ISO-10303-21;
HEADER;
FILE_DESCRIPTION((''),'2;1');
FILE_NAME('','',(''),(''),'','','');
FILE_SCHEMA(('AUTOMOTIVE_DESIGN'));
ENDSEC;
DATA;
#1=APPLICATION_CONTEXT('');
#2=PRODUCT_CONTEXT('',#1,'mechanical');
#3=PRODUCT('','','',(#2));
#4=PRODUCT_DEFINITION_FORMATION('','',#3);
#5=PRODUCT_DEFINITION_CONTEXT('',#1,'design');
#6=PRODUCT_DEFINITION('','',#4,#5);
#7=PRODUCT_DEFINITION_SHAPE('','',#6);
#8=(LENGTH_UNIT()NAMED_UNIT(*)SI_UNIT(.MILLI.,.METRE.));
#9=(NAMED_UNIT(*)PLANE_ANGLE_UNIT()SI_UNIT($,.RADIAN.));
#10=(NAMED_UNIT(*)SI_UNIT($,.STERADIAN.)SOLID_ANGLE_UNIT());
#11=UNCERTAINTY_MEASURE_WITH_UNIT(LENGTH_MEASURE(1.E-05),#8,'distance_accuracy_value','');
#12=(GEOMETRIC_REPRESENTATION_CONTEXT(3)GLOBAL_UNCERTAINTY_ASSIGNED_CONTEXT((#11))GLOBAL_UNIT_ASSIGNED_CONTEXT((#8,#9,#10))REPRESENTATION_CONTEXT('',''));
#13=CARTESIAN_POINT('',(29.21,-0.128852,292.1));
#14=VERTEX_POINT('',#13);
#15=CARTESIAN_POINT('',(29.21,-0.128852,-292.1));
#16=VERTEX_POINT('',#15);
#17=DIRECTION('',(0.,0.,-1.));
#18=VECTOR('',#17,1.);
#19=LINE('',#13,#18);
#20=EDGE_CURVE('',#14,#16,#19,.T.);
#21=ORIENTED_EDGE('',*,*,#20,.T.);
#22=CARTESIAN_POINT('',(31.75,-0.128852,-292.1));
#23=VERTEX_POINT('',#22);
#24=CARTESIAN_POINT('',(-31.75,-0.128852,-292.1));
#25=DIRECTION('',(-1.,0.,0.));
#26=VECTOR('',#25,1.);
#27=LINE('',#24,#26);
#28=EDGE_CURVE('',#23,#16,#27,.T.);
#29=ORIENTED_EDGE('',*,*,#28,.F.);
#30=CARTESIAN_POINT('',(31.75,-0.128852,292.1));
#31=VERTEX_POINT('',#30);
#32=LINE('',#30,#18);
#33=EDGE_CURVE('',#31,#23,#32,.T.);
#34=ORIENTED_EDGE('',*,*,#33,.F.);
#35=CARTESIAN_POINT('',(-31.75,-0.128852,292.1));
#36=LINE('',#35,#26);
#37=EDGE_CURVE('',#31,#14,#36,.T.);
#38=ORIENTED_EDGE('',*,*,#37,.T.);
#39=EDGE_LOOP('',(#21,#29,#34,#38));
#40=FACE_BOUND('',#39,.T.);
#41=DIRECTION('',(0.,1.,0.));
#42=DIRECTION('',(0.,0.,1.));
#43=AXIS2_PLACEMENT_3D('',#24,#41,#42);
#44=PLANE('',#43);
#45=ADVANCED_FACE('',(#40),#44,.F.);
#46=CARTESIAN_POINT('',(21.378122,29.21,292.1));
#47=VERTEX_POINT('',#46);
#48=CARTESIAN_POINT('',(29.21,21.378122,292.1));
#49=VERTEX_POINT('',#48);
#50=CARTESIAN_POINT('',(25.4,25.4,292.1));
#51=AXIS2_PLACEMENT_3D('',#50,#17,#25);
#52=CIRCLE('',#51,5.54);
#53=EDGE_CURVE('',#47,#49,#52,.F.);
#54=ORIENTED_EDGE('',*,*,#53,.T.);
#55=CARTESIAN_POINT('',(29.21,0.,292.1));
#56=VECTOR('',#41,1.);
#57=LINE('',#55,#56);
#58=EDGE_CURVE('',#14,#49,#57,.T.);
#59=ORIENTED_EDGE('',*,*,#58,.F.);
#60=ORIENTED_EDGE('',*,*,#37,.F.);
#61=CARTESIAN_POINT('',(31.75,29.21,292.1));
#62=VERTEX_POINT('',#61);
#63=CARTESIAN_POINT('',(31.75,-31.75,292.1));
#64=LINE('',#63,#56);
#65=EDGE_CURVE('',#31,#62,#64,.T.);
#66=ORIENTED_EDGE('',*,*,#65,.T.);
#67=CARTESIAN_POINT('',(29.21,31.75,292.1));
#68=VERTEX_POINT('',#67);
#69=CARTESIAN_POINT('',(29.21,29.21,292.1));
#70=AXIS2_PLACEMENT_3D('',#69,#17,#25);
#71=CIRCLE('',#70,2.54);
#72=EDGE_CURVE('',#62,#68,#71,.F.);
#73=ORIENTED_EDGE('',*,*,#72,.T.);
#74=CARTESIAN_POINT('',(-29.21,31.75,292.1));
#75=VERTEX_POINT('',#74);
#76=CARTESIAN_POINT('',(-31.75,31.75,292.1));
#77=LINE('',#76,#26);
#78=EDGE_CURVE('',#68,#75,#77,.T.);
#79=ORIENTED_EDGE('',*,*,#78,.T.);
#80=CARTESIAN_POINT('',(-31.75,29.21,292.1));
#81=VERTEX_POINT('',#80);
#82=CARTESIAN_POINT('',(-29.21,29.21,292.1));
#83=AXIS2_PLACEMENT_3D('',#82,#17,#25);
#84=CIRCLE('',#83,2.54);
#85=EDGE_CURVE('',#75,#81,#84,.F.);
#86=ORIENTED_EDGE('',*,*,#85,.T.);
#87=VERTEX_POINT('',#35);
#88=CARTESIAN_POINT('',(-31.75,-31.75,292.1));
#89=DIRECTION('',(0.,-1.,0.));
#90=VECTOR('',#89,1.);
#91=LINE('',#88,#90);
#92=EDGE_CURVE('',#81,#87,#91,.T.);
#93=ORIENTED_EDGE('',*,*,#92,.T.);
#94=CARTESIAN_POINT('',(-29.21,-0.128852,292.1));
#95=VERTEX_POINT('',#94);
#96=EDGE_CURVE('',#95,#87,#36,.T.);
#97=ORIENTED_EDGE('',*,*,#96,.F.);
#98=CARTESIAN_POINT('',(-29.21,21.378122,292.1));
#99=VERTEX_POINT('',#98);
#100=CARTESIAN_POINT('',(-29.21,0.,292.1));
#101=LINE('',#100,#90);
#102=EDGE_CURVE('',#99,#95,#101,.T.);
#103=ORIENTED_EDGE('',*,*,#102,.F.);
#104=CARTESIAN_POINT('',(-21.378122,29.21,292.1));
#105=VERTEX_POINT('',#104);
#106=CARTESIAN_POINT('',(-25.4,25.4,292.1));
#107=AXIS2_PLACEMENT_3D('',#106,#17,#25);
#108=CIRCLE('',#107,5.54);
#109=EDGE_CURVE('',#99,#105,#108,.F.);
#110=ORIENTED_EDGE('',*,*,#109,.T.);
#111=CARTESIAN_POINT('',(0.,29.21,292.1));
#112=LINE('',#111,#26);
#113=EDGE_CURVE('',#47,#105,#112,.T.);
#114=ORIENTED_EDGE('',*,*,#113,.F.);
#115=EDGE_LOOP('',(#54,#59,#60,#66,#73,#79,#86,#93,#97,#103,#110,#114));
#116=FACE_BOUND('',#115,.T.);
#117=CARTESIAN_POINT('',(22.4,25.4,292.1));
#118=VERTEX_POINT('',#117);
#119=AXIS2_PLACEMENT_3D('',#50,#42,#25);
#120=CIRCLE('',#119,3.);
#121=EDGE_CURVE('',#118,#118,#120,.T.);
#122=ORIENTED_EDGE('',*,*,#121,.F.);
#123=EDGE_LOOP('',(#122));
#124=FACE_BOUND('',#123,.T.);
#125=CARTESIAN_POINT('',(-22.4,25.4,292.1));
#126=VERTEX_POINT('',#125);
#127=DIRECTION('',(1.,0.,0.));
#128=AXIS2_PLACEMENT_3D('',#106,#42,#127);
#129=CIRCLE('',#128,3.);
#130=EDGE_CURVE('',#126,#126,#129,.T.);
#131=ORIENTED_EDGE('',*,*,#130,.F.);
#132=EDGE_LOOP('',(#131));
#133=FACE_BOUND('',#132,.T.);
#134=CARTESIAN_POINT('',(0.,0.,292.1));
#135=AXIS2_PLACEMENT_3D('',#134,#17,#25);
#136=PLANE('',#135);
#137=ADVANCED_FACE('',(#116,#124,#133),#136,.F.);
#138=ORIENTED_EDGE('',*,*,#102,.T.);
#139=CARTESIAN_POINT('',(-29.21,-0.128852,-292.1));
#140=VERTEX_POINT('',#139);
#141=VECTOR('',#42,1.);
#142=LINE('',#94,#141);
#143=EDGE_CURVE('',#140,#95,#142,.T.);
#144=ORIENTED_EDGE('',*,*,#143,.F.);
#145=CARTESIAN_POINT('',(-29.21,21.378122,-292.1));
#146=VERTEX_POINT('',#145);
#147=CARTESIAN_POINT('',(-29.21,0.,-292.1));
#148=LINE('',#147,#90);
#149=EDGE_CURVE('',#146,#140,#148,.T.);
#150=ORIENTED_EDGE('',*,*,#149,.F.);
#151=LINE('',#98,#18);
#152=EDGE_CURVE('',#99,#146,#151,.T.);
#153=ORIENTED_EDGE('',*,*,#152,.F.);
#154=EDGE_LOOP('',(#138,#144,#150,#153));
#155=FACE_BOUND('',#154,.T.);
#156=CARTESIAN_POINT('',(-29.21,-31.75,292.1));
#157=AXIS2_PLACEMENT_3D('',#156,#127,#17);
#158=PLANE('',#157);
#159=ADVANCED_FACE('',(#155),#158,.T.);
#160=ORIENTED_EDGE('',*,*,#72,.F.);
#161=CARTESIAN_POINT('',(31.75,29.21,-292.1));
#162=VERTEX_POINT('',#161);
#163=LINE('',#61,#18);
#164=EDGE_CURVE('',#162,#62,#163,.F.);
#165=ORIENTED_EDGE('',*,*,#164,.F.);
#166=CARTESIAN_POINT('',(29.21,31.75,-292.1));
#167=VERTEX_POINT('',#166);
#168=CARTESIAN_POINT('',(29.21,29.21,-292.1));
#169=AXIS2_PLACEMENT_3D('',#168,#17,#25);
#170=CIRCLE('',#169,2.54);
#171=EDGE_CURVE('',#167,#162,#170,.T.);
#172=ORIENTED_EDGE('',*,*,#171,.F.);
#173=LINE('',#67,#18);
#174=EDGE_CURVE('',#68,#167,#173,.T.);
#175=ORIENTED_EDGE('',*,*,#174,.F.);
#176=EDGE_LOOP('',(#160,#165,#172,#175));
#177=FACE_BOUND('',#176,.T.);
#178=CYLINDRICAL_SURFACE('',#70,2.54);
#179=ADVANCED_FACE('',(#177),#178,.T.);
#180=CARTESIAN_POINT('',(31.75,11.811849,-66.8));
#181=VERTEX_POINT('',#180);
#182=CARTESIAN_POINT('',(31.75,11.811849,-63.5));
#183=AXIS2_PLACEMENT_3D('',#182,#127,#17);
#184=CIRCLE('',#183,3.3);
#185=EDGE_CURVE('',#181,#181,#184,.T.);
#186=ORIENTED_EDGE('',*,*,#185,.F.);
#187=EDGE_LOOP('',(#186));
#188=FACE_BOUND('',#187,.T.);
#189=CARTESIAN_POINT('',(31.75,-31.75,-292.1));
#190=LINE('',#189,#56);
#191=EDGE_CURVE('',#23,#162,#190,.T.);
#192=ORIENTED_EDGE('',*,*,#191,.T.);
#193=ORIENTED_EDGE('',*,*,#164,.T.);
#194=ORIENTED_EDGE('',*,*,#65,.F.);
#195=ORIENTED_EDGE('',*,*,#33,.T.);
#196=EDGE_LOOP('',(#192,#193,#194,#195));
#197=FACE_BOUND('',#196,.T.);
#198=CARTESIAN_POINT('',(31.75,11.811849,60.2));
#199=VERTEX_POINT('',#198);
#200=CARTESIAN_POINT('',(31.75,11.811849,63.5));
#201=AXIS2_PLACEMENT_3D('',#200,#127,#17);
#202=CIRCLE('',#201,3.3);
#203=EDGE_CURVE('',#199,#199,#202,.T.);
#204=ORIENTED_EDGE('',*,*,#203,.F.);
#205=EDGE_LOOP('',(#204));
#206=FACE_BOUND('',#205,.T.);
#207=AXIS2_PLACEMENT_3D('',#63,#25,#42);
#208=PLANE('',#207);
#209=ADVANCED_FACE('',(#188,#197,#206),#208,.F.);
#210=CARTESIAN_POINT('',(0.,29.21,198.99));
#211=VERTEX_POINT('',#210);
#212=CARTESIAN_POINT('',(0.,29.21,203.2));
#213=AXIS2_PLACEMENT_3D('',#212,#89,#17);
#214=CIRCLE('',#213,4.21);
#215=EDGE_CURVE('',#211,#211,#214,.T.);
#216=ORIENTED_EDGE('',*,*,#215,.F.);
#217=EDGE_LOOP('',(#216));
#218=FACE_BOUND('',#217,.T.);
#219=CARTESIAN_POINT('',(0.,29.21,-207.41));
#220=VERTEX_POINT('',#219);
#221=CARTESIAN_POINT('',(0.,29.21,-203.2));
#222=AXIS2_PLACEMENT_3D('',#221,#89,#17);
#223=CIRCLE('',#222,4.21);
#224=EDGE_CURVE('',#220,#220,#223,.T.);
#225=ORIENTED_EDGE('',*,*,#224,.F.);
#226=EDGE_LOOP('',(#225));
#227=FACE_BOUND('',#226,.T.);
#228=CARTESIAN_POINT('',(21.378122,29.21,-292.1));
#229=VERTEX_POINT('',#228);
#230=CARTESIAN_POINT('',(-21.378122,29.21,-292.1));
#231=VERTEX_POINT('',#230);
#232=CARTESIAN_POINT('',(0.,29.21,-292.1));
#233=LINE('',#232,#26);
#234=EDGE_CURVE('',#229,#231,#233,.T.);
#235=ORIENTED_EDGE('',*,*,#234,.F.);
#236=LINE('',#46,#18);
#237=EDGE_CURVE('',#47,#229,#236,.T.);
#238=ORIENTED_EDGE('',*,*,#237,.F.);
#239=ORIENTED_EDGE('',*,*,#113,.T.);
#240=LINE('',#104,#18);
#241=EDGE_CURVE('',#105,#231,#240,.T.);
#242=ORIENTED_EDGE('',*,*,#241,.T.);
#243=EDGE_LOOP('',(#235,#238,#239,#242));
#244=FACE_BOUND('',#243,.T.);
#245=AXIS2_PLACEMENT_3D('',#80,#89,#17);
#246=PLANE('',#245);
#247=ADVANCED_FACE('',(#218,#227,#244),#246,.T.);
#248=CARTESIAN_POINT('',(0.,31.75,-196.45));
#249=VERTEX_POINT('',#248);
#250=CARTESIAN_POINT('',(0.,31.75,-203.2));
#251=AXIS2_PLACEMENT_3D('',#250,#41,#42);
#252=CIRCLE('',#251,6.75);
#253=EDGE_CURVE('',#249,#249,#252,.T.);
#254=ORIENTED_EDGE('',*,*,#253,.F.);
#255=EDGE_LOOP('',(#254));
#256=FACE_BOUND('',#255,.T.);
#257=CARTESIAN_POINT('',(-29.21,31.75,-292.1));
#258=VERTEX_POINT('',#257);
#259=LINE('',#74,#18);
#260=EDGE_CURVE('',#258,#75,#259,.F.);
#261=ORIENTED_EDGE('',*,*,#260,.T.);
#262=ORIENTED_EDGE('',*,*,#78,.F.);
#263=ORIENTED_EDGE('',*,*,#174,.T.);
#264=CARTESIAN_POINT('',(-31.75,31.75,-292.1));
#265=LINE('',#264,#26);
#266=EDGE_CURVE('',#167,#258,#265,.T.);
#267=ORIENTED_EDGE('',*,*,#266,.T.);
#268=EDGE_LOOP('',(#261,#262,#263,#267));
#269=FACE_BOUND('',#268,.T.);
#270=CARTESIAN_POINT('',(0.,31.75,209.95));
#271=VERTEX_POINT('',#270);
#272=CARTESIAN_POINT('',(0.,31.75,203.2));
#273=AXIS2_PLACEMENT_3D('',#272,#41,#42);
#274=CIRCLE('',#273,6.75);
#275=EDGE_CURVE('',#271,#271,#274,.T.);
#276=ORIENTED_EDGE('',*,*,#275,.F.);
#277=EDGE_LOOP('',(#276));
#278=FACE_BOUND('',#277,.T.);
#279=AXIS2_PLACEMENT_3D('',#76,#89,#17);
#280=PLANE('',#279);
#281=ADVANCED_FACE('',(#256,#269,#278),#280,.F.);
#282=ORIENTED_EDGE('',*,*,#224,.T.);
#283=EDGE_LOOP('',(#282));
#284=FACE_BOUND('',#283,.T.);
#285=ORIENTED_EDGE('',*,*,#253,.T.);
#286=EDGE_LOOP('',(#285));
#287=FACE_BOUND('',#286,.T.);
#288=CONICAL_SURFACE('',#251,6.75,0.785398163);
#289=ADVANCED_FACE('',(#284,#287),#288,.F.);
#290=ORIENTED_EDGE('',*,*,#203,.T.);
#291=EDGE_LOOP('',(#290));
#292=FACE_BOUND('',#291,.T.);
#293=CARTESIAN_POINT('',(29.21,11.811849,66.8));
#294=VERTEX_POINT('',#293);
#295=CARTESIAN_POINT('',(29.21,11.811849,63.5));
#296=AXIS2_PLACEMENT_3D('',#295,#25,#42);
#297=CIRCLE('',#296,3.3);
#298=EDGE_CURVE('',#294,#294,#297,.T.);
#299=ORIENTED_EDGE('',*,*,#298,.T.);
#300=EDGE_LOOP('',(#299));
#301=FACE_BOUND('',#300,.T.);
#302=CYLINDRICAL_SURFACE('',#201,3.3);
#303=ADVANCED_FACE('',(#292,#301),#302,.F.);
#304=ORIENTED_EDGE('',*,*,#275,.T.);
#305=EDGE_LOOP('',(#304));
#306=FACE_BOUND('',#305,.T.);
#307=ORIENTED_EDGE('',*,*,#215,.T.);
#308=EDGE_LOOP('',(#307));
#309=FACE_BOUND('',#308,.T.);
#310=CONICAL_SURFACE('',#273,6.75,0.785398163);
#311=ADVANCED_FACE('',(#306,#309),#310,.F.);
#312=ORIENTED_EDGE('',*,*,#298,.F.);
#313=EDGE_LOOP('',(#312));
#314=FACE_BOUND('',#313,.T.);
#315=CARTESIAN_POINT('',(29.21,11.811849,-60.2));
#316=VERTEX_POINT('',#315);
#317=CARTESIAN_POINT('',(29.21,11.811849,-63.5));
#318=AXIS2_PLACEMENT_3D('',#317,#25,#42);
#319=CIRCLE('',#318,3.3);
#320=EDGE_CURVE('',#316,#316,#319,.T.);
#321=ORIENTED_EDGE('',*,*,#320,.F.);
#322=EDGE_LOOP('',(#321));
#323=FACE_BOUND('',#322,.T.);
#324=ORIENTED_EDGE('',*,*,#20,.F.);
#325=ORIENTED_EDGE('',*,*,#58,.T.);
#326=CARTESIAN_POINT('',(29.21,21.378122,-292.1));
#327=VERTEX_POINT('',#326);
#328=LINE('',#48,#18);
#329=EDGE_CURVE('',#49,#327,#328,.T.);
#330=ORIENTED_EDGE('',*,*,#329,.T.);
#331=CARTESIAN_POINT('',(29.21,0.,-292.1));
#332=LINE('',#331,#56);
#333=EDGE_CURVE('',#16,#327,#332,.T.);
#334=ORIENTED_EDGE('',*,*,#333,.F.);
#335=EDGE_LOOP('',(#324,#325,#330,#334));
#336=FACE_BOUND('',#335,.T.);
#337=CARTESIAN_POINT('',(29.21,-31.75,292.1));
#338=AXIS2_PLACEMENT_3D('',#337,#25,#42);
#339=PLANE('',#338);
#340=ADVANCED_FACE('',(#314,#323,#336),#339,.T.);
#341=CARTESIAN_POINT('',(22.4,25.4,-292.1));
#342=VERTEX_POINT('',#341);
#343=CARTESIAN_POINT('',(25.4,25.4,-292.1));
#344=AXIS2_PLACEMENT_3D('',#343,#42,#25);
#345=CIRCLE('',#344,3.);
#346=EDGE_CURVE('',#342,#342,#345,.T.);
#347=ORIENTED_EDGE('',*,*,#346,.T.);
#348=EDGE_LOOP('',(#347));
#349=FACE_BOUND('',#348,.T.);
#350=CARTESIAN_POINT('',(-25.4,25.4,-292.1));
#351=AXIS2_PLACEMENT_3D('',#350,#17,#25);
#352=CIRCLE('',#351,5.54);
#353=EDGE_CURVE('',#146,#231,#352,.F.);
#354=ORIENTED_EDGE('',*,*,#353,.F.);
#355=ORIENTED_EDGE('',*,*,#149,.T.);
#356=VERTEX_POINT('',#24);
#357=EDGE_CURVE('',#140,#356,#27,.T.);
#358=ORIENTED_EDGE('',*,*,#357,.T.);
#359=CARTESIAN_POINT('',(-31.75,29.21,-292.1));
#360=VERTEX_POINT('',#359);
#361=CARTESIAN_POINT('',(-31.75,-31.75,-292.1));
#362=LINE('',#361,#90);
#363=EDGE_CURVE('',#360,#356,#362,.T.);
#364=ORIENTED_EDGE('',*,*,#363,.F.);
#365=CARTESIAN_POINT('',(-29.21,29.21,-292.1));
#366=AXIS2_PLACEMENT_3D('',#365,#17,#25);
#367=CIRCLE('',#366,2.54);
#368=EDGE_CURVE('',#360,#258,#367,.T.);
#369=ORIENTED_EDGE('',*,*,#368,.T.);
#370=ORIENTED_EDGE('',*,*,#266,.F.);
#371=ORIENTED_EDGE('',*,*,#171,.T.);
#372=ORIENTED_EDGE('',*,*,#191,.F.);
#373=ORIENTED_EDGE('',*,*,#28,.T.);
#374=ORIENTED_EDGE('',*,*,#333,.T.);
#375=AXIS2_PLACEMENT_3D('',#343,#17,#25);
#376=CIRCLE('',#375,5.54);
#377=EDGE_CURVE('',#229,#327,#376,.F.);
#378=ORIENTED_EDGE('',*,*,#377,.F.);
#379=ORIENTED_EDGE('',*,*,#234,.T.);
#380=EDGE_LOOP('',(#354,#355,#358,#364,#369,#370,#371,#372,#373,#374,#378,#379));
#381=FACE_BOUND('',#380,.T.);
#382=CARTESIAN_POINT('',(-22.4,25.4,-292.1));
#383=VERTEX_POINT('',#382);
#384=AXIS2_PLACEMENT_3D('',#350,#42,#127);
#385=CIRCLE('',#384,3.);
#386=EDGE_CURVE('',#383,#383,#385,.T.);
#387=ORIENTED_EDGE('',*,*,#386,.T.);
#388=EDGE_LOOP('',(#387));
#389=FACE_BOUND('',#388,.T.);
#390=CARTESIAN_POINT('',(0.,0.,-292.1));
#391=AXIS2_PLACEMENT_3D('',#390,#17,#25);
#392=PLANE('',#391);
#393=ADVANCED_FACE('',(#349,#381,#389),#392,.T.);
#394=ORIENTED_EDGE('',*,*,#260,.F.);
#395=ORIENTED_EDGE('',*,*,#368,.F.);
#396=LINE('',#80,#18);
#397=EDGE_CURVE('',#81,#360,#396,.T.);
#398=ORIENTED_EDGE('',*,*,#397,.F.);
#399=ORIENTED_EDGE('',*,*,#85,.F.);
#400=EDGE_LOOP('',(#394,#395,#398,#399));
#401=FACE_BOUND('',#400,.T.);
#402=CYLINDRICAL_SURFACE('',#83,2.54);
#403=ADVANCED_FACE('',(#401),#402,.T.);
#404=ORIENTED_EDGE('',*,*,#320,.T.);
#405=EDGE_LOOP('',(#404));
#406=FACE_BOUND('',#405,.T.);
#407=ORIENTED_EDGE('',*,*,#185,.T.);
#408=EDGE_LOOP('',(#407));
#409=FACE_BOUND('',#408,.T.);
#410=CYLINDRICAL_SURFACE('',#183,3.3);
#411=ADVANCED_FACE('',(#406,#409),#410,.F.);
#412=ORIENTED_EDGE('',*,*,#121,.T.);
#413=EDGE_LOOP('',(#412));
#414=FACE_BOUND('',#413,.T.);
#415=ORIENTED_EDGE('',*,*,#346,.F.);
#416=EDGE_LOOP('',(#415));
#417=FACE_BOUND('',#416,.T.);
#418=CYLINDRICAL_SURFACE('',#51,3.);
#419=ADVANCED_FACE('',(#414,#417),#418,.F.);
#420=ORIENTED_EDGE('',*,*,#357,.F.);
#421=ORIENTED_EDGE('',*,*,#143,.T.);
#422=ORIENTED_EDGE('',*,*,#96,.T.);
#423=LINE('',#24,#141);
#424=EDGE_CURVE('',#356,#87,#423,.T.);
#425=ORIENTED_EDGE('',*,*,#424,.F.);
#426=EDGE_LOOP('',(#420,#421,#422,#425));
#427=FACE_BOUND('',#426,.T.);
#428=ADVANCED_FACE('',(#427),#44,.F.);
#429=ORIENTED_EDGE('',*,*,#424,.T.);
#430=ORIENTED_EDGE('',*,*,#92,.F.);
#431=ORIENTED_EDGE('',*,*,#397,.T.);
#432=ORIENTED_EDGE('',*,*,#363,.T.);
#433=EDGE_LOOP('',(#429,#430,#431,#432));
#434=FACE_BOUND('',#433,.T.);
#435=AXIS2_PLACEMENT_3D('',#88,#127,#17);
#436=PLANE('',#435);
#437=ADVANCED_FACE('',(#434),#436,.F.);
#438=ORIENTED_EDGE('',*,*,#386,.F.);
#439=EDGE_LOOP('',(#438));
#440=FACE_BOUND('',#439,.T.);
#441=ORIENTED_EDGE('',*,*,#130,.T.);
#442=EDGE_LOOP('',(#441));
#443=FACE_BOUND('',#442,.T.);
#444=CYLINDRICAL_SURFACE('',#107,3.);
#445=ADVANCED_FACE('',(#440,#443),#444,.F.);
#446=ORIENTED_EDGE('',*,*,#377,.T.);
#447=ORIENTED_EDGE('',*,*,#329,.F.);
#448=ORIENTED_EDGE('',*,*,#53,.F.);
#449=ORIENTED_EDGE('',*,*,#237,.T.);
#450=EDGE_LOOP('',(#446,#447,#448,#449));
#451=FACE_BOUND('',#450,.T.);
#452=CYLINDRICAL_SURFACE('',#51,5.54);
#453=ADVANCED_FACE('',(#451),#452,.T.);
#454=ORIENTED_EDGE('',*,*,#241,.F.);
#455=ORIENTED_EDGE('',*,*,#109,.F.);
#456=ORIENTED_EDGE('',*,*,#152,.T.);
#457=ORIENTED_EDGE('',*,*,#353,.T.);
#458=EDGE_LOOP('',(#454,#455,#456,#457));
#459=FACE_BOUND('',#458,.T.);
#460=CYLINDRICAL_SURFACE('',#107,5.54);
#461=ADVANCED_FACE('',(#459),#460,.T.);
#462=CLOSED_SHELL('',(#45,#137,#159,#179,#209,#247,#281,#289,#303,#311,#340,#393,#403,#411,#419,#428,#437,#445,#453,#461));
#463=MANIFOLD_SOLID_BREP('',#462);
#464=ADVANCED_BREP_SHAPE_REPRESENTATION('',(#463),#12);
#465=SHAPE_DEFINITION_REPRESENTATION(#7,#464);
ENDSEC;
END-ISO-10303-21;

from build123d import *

# Parameters (mm, degrees)
SKETCH1_W                                            = 63.5
SKETCH1_H                                            = 63.5
SKETCH1_R                                            = 3
BOSS_EXTRUDE1_DEPTH                                  = 292.1
FILLET1_R                                            = 2.54
SHELL1_START                                         = -292.1
SHELL1_DEPTH                                         = 584.2
SKETCH3_W                                            = 63.665273771
SKETCH3_H                                            = 31.75
CUT_EXTRUDE2_DEPTH                                   = 586.923002621
CSK_FOR_M6_HEX_SOCKET_COUNTERSUNK_HEAD_S_D           = 6.4
CSK_FOR_M6_HEX_SOCKET_COUNTERSUNK_HEAD_S_CSINK_D     = 13.5
CSK_FOR_M6_HEX_SOCKET_COUNTERSUNK_HEAD_S_CSINK_ANGLE = 90
M6_CLEARANCE_HOLE1_D                                 = 6.6
M6_CLEARANCE_HOLE1_DEPTH                             = 2.54


# Read off the part's stored shape, not the designer's step: Shell1
with BuildPart() as part:
    # Sketch1 → Boss-Extrude1 (new, symmetric)
    with BuildSketch(Plane.XY):
        Rectangle(SKETCH1_W, SKETCH1_H)
        with Locations((-25.4, 25.4)):
            Circle(SKETCH1_R, mode=Mode.SUBTRACT)
        with Locations(Location((25.4, -25.4, 0), (0, 0, 180))):
            Circle(SKETCH1_R, mode=Mode.SUBTRACT)
        with Locations(Location((-25.4, -25.4, 0), (0, 0, 180))):
            Circle(SKETCH1_R, mode=Mode.SUBTRACT)
        with Locations(Location((25.4, 25.4, 0), (0, 0, 180))):
            Circle(SKETCH1_R, mode=Mode.SUBTRACT)
    extrude(amount=BOSS_EXTRUDE1_DEPTH, both=True)

    # Fillet1
    fillet1_edges = [part.edges().sort_by_distance(p)[0] for p in [
        (31.75, -31.75, 0),
        (-31.75, -31.75, 0),
        (-31.75, 31.75, 0),
        (31.75, 31.75, 0),
    ]]
    fillet(fillet1_edges, radius=FILLET1_R)

    # Shell1 outline → Shell1 (cut)
    with BuildSketch(Plane.XY.offset(SHELL1_START)):
        with BuildLine():
            Line((29.21, -21.378122329), (29.21, 21.378122329))
            ThreePointArc((29.21, 21.378122329), (21.482628432, 21.482628432), (21.378122329, 29.21))
            Line((21.378122329, 29.21), (-21.378122329, 29.21))
            ThreePointArc((-21.378122329, 29.21), (-21.482628432, 21.482628432), (-29.21, 21.378122329))
            Line((-29.21, 21.378122329), (-29.21, -21.378122329))
            ThreePointArc((-29.21, -21.378122329), (-21.482628432, -21.482628432), (-21.378122329, -29.21))
            Line((-21.378122329, -29.21), (21.378122329, -29.21))
            ThreePointArc((21.378122329, -29.21), (21.482628432, -21.482628432), (29.21, -21.378122329))
        make_face()
    extrude(amount=SHELL1_DEPTH, mode=Mode.SUBTRACT)

    # Sketch3 → Cut-Extrude2 (cut, through all)
    with BuildSketch(Plane.XY.offset(292.1)):
        with Locations((0.082636885, -16.003852467)):
            Rectangle(SKETCH3_W, SKETCH3_H)
    extrude(amount=-CUT_EXTRUDE2_DEPTH, mode=Mode.SUBTRACT)

    # CSK for M6 Hex Socket Countersunk Head Screw1 (through all)
    with Locations(Plane(origin=(0, 31.75, 0), x_dir=(1, 0, 0), z_dir=(0, 1, 0))):
        with Locations((0, 203.2), (0, -203.2)):
            CounterSinkHole(CSK_FOR_M6_HEX_SOCKET_COUNTERSUNK_HEAD_S_D / 2, CSK_FOR_M6_HEX_SOCKET_COUNTERSUNK_HEAD_S_CSINK_D / 2, counter_sink_angle=CSK_FOR_M6_HEX_SOCKET_COUNTERSUNK_HEAD_S_CSINK_ANGLE)

    # M6 Clearance Hole1
    with Locations(Plane(origin=(31.75, 0, 0), x_dir=(0, 0, -1), z_dir=(1, 0, 0))):
        with Locations((63.5, 11.811849331), (-63.5, 11.811849331)):
            Hole(M6_CLEARANCE_HOLE1_D / 2, depth=M6_CLEARANCE_HOLE1_DEPTH)


solid = part.part
